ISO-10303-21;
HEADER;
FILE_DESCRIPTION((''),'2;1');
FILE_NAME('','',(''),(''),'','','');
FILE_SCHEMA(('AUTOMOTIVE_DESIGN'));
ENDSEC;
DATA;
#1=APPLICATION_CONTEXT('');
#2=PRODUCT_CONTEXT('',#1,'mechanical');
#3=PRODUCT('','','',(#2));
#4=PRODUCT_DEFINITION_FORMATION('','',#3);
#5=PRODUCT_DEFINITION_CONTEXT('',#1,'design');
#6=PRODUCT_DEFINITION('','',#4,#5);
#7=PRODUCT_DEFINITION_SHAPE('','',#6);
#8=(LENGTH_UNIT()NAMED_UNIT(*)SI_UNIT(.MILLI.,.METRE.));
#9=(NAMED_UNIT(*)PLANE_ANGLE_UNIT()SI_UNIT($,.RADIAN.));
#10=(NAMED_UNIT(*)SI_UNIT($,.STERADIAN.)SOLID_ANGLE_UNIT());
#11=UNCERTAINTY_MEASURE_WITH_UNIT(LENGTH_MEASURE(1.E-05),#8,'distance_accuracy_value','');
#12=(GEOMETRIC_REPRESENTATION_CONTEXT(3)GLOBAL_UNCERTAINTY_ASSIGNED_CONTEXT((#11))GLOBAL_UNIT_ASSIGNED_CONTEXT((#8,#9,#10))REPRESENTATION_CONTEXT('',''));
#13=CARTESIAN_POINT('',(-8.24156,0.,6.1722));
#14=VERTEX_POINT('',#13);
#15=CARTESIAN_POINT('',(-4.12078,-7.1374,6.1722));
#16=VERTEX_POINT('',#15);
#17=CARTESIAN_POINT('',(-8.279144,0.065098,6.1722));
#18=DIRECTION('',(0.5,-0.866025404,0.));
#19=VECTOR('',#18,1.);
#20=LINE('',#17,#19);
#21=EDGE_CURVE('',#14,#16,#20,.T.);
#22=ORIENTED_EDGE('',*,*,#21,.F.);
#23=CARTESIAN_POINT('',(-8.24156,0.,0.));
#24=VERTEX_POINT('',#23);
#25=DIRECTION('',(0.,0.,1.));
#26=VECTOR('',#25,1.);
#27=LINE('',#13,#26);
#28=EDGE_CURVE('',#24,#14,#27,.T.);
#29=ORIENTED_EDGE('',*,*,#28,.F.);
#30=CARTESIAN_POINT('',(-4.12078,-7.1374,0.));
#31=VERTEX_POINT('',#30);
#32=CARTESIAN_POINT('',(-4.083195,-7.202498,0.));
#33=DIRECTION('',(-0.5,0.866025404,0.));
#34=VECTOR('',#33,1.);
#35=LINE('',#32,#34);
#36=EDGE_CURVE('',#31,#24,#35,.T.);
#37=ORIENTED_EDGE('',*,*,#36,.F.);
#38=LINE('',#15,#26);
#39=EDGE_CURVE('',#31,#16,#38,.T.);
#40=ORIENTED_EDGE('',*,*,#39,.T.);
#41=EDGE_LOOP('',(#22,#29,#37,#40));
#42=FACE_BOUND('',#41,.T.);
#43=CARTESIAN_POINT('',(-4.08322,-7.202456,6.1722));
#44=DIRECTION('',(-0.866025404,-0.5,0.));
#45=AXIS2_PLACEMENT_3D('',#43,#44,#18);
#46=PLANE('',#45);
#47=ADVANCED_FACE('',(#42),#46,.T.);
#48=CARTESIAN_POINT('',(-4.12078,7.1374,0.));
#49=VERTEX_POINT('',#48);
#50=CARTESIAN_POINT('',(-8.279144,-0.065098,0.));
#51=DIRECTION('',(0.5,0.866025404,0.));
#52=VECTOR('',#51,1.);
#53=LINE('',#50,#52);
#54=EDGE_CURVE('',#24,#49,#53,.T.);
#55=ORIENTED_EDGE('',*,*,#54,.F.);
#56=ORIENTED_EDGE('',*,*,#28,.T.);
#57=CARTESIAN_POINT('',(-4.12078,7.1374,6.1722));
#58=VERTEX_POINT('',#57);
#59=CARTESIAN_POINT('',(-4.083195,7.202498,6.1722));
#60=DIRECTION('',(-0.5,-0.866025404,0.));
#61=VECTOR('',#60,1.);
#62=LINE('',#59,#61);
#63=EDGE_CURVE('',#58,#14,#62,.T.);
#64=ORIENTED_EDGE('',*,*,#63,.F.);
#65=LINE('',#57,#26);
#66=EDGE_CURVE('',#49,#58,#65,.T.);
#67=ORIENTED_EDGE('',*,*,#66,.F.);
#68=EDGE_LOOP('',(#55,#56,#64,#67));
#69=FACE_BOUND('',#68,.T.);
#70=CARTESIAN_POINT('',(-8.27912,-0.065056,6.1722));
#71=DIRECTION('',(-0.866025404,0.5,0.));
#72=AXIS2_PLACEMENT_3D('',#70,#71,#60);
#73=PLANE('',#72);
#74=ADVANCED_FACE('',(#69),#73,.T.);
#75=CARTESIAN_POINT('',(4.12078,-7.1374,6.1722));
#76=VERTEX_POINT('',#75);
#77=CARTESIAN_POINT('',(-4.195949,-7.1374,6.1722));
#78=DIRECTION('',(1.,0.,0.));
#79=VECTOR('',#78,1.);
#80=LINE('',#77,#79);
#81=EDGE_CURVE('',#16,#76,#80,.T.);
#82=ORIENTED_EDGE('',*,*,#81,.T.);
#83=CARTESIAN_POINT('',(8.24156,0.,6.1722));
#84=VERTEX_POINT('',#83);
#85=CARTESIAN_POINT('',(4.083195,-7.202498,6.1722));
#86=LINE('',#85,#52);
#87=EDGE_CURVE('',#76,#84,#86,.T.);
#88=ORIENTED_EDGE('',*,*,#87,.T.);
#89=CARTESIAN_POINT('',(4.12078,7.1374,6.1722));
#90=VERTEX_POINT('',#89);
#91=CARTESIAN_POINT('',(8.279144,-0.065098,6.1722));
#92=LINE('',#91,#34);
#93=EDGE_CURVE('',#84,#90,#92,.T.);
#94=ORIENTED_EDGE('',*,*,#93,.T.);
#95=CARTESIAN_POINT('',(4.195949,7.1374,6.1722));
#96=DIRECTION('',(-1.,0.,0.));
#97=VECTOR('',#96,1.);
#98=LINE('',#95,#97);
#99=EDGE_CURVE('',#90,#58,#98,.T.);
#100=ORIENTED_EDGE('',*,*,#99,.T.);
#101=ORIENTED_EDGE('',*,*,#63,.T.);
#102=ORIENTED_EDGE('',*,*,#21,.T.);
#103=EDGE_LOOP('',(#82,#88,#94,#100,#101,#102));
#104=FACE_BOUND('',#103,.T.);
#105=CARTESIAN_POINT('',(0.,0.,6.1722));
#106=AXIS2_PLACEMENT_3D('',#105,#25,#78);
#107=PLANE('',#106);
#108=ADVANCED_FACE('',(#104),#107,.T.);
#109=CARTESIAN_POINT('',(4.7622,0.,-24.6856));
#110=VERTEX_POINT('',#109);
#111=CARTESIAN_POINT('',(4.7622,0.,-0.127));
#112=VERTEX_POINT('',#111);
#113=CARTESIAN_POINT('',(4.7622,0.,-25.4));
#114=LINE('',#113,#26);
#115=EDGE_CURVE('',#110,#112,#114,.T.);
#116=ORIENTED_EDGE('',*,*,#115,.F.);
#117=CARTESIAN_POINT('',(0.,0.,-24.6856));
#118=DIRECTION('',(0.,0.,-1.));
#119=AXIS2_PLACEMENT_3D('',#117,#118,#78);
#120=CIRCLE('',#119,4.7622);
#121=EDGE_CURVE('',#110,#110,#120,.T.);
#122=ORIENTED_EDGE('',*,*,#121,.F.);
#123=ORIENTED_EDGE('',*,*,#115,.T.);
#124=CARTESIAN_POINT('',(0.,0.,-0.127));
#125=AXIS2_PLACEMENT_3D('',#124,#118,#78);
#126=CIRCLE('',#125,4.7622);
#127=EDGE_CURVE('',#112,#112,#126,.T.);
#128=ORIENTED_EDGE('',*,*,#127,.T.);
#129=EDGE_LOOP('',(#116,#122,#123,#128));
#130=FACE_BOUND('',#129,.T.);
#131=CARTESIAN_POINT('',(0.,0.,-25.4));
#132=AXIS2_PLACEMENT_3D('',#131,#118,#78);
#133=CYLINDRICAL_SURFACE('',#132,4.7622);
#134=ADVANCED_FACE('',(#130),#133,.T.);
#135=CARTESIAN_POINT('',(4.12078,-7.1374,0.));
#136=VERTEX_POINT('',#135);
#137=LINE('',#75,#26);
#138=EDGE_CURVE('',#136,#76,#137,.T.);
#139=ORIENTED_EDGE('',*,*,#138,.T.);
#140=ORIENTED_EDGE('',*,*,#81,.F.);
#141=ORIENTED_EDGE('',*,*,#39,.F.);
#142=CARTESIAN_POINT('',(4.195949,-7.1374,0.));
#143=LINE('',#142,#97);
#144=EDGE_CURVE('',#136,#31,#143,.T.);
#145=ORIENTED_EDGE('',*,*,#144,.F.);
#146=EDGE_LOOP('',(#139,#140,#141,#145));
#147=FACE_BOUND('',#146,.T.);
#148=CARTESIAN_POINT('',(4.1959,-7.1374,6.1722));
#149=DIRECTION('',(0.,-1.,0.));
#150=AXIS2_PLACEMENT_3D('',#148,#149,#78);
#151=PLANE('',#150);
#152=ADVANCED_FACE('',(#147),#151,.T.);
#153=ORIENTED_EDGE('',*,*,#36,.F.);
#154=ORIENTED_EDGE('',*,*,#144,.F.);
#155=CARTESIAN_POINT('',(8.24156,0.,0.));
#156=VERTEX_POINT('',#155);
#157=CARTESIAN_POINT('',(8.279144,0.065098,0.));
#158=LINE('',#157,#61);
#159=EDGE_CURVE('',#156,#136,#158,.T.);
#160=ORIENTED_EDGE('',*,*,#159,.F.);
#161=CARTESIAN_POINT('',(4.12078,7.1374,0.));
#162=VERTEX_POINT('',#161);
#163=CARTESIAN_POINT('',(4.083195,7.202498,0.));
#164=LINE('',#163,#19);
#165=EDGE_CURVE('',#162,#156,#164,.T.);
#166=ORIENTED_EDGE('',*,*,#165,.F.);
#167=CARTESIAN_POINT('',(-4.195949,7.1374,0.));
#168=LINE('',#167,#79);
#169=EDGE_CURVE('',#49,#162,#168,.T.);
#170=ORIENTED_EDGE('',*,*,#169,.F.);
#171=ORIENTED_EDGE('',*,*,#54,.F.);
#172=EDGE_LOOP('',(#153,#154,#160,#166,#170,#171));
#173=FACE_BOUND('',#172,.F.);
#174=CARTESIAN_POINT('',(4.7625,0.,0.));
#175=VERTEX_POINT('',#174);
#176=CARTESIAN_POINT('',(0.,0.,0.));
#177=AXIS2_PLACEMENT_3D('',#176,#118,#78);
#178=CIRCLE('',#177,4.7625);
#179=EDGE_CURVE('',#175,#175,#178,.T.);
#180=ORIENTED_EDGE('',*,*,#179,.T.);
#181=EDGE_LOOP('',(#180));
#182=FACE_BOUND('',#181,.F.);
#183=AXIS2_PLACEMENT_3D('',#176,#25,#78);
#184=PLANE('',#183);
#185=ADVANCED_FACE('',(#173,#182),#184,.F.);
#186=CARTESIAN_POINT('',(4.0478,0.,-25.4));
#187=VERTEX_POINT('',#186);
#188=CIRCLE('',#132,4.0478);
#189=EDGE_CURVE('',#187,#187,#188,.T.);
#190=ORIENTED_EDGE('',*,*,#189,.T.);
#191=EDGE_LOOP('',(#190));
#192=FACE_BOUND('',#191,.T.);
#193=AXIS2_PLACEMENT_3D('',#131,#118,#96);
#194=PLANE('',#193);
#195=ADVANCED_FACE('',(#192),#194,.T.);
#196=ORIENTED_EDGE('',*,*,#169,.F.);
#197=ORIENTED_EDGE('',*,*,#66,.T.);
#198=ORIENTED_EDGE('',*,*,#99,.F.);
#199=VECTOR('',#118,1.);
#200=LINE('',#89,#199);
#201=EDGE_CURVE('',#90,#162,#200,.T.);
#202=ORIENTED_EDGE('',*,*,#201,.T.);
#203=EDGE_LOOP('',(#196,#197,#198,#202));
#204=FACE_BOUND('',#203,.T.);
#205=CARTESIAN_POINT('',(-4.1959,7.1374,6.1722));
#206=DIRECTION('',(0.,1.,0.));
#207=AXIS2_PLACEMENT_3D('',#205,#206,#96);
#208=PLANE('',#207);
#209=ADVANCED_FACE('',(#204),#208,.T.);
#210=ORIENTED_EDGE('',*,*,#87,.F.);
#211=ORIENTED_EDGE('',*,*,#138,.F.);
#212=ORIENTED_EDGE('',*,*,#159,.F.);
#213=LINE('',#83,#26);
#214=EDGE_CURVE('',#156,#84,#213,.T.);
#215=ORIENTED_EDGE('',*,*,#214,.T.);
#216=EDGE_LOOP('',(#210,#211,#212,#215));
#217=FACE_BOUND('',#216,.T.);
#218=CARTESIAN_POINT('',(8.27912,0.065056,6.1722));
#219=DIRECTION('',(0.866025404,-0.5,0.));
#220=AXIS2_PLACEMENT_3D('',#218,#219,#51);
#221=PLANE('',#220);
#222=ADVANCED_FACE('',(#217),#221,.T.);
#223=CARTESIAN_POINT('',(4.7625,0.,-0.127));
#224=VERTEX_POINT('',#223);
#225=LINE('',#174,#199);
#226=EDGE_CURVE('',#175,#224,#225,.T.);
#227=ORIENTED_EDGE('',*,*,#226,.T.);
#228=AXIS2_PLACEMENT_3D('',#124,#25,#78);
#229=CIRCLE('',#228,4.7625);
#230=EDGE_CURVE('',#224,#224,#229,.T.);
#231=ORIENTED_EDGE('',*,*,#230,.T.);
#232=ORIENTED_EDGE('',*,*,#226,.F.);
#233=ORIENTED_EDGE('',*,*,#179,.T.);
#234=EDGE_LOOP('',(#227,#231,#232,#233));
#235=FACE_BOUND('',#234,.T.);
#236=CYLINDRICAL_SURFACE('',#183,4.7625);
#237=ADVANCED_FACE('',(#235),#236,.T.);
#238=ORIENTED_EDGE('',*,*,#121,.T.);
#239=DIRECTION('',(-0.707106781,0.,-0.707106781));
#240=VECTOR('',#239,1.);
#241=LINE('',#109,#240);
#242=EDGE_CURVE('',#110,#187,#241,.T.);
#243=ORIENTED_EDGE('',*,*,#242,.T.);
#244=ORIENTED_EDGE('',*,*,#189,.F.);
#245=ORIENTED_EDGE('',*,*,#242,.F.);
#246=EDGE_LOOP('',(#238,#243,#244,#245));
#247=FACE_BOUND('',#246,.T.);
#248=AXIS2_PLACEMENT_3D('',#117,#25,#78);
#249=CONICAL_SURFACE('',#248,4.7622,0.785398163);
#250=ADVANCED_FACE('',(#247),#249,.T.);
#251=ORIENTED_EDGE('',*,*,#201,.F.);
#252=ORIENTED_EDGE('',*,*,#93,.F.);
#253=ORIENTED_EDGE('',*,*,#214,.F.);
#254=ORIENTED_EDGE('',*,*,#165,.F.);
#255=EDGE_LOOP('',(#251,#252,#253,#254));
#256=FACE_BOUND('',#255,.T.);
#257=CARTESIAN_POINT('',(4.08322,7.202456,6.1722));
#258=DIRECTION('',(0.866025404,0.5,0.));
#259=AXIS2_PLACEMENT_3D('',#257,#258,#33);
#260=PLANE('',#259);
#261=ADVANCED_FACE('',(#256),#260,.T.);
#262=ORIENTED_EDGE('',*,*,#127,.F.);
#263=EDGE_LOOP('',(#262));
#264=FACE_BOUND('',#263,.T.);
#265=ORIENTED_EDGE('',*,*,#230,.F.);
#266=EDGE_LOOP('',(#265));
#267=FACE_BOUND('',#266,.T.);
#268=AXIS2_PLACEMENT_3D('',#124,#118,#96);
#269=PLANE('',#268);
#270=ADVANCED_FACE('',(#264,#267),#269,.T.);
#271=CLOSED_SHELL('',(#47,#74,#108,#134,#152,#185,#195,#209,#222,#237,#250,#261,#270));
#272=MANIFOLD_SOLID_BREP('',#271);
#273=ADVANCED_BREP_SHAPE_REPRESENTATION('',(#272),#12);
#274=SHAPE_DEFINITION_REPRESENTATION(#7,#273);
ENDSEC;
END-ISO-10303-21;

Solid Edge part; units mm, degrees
sketch "Sketch1" plane through (0, 0, 0) normal (0, 0, 1) x (1, 0, 0)
  circle A0 centre (0, 0) radius 8.2794
  dimension "D1" = 16.5588
extrude "Protrusion1" add sketch "Sketch1" along normal blind 6.1722
sketch "Sketch2" plane through (0, 0, 0) normal (0, 0, -1) x (1, 0, 0)
  circle A0 centre (0, 0) radius 4.7625
extrude "Protrusion2" add sketch "Sketch2" along normal blind 25.4
sketch "Sketch3" plane through (0, 0, -25.4) normal (0, 0, -1) x (1, 0, 0)
  circle A0 centre (0, 0) radius 4.7622
extrude "Cutout1" cut sketch "Sketch3" against normal blind 25.273 flip side to cut
chamfer "Chamfer_1" distance 0.7144 angle 45 1 edges at (-4.7622, 0, -25.4)
sketch "Sketch4" plane through (0, 0, 6.1722) normal (0, 0, 1) x (1, 0, 0)
  line L0 (-4.1959, 7.1374) -> (4.1959, 7.1374)
  dimension "D1" = 14.2748
extrude "Cutout2" cut sketch "Sketch4" against normal up to next material side at (0, 7.1874, 6.1722)
pattern_circular "Pattern1" count 6 over 360 about axis through (0, 0, 6.1722) along (0, 0, 1) of "Cutout2"
properties part number "24100380"
